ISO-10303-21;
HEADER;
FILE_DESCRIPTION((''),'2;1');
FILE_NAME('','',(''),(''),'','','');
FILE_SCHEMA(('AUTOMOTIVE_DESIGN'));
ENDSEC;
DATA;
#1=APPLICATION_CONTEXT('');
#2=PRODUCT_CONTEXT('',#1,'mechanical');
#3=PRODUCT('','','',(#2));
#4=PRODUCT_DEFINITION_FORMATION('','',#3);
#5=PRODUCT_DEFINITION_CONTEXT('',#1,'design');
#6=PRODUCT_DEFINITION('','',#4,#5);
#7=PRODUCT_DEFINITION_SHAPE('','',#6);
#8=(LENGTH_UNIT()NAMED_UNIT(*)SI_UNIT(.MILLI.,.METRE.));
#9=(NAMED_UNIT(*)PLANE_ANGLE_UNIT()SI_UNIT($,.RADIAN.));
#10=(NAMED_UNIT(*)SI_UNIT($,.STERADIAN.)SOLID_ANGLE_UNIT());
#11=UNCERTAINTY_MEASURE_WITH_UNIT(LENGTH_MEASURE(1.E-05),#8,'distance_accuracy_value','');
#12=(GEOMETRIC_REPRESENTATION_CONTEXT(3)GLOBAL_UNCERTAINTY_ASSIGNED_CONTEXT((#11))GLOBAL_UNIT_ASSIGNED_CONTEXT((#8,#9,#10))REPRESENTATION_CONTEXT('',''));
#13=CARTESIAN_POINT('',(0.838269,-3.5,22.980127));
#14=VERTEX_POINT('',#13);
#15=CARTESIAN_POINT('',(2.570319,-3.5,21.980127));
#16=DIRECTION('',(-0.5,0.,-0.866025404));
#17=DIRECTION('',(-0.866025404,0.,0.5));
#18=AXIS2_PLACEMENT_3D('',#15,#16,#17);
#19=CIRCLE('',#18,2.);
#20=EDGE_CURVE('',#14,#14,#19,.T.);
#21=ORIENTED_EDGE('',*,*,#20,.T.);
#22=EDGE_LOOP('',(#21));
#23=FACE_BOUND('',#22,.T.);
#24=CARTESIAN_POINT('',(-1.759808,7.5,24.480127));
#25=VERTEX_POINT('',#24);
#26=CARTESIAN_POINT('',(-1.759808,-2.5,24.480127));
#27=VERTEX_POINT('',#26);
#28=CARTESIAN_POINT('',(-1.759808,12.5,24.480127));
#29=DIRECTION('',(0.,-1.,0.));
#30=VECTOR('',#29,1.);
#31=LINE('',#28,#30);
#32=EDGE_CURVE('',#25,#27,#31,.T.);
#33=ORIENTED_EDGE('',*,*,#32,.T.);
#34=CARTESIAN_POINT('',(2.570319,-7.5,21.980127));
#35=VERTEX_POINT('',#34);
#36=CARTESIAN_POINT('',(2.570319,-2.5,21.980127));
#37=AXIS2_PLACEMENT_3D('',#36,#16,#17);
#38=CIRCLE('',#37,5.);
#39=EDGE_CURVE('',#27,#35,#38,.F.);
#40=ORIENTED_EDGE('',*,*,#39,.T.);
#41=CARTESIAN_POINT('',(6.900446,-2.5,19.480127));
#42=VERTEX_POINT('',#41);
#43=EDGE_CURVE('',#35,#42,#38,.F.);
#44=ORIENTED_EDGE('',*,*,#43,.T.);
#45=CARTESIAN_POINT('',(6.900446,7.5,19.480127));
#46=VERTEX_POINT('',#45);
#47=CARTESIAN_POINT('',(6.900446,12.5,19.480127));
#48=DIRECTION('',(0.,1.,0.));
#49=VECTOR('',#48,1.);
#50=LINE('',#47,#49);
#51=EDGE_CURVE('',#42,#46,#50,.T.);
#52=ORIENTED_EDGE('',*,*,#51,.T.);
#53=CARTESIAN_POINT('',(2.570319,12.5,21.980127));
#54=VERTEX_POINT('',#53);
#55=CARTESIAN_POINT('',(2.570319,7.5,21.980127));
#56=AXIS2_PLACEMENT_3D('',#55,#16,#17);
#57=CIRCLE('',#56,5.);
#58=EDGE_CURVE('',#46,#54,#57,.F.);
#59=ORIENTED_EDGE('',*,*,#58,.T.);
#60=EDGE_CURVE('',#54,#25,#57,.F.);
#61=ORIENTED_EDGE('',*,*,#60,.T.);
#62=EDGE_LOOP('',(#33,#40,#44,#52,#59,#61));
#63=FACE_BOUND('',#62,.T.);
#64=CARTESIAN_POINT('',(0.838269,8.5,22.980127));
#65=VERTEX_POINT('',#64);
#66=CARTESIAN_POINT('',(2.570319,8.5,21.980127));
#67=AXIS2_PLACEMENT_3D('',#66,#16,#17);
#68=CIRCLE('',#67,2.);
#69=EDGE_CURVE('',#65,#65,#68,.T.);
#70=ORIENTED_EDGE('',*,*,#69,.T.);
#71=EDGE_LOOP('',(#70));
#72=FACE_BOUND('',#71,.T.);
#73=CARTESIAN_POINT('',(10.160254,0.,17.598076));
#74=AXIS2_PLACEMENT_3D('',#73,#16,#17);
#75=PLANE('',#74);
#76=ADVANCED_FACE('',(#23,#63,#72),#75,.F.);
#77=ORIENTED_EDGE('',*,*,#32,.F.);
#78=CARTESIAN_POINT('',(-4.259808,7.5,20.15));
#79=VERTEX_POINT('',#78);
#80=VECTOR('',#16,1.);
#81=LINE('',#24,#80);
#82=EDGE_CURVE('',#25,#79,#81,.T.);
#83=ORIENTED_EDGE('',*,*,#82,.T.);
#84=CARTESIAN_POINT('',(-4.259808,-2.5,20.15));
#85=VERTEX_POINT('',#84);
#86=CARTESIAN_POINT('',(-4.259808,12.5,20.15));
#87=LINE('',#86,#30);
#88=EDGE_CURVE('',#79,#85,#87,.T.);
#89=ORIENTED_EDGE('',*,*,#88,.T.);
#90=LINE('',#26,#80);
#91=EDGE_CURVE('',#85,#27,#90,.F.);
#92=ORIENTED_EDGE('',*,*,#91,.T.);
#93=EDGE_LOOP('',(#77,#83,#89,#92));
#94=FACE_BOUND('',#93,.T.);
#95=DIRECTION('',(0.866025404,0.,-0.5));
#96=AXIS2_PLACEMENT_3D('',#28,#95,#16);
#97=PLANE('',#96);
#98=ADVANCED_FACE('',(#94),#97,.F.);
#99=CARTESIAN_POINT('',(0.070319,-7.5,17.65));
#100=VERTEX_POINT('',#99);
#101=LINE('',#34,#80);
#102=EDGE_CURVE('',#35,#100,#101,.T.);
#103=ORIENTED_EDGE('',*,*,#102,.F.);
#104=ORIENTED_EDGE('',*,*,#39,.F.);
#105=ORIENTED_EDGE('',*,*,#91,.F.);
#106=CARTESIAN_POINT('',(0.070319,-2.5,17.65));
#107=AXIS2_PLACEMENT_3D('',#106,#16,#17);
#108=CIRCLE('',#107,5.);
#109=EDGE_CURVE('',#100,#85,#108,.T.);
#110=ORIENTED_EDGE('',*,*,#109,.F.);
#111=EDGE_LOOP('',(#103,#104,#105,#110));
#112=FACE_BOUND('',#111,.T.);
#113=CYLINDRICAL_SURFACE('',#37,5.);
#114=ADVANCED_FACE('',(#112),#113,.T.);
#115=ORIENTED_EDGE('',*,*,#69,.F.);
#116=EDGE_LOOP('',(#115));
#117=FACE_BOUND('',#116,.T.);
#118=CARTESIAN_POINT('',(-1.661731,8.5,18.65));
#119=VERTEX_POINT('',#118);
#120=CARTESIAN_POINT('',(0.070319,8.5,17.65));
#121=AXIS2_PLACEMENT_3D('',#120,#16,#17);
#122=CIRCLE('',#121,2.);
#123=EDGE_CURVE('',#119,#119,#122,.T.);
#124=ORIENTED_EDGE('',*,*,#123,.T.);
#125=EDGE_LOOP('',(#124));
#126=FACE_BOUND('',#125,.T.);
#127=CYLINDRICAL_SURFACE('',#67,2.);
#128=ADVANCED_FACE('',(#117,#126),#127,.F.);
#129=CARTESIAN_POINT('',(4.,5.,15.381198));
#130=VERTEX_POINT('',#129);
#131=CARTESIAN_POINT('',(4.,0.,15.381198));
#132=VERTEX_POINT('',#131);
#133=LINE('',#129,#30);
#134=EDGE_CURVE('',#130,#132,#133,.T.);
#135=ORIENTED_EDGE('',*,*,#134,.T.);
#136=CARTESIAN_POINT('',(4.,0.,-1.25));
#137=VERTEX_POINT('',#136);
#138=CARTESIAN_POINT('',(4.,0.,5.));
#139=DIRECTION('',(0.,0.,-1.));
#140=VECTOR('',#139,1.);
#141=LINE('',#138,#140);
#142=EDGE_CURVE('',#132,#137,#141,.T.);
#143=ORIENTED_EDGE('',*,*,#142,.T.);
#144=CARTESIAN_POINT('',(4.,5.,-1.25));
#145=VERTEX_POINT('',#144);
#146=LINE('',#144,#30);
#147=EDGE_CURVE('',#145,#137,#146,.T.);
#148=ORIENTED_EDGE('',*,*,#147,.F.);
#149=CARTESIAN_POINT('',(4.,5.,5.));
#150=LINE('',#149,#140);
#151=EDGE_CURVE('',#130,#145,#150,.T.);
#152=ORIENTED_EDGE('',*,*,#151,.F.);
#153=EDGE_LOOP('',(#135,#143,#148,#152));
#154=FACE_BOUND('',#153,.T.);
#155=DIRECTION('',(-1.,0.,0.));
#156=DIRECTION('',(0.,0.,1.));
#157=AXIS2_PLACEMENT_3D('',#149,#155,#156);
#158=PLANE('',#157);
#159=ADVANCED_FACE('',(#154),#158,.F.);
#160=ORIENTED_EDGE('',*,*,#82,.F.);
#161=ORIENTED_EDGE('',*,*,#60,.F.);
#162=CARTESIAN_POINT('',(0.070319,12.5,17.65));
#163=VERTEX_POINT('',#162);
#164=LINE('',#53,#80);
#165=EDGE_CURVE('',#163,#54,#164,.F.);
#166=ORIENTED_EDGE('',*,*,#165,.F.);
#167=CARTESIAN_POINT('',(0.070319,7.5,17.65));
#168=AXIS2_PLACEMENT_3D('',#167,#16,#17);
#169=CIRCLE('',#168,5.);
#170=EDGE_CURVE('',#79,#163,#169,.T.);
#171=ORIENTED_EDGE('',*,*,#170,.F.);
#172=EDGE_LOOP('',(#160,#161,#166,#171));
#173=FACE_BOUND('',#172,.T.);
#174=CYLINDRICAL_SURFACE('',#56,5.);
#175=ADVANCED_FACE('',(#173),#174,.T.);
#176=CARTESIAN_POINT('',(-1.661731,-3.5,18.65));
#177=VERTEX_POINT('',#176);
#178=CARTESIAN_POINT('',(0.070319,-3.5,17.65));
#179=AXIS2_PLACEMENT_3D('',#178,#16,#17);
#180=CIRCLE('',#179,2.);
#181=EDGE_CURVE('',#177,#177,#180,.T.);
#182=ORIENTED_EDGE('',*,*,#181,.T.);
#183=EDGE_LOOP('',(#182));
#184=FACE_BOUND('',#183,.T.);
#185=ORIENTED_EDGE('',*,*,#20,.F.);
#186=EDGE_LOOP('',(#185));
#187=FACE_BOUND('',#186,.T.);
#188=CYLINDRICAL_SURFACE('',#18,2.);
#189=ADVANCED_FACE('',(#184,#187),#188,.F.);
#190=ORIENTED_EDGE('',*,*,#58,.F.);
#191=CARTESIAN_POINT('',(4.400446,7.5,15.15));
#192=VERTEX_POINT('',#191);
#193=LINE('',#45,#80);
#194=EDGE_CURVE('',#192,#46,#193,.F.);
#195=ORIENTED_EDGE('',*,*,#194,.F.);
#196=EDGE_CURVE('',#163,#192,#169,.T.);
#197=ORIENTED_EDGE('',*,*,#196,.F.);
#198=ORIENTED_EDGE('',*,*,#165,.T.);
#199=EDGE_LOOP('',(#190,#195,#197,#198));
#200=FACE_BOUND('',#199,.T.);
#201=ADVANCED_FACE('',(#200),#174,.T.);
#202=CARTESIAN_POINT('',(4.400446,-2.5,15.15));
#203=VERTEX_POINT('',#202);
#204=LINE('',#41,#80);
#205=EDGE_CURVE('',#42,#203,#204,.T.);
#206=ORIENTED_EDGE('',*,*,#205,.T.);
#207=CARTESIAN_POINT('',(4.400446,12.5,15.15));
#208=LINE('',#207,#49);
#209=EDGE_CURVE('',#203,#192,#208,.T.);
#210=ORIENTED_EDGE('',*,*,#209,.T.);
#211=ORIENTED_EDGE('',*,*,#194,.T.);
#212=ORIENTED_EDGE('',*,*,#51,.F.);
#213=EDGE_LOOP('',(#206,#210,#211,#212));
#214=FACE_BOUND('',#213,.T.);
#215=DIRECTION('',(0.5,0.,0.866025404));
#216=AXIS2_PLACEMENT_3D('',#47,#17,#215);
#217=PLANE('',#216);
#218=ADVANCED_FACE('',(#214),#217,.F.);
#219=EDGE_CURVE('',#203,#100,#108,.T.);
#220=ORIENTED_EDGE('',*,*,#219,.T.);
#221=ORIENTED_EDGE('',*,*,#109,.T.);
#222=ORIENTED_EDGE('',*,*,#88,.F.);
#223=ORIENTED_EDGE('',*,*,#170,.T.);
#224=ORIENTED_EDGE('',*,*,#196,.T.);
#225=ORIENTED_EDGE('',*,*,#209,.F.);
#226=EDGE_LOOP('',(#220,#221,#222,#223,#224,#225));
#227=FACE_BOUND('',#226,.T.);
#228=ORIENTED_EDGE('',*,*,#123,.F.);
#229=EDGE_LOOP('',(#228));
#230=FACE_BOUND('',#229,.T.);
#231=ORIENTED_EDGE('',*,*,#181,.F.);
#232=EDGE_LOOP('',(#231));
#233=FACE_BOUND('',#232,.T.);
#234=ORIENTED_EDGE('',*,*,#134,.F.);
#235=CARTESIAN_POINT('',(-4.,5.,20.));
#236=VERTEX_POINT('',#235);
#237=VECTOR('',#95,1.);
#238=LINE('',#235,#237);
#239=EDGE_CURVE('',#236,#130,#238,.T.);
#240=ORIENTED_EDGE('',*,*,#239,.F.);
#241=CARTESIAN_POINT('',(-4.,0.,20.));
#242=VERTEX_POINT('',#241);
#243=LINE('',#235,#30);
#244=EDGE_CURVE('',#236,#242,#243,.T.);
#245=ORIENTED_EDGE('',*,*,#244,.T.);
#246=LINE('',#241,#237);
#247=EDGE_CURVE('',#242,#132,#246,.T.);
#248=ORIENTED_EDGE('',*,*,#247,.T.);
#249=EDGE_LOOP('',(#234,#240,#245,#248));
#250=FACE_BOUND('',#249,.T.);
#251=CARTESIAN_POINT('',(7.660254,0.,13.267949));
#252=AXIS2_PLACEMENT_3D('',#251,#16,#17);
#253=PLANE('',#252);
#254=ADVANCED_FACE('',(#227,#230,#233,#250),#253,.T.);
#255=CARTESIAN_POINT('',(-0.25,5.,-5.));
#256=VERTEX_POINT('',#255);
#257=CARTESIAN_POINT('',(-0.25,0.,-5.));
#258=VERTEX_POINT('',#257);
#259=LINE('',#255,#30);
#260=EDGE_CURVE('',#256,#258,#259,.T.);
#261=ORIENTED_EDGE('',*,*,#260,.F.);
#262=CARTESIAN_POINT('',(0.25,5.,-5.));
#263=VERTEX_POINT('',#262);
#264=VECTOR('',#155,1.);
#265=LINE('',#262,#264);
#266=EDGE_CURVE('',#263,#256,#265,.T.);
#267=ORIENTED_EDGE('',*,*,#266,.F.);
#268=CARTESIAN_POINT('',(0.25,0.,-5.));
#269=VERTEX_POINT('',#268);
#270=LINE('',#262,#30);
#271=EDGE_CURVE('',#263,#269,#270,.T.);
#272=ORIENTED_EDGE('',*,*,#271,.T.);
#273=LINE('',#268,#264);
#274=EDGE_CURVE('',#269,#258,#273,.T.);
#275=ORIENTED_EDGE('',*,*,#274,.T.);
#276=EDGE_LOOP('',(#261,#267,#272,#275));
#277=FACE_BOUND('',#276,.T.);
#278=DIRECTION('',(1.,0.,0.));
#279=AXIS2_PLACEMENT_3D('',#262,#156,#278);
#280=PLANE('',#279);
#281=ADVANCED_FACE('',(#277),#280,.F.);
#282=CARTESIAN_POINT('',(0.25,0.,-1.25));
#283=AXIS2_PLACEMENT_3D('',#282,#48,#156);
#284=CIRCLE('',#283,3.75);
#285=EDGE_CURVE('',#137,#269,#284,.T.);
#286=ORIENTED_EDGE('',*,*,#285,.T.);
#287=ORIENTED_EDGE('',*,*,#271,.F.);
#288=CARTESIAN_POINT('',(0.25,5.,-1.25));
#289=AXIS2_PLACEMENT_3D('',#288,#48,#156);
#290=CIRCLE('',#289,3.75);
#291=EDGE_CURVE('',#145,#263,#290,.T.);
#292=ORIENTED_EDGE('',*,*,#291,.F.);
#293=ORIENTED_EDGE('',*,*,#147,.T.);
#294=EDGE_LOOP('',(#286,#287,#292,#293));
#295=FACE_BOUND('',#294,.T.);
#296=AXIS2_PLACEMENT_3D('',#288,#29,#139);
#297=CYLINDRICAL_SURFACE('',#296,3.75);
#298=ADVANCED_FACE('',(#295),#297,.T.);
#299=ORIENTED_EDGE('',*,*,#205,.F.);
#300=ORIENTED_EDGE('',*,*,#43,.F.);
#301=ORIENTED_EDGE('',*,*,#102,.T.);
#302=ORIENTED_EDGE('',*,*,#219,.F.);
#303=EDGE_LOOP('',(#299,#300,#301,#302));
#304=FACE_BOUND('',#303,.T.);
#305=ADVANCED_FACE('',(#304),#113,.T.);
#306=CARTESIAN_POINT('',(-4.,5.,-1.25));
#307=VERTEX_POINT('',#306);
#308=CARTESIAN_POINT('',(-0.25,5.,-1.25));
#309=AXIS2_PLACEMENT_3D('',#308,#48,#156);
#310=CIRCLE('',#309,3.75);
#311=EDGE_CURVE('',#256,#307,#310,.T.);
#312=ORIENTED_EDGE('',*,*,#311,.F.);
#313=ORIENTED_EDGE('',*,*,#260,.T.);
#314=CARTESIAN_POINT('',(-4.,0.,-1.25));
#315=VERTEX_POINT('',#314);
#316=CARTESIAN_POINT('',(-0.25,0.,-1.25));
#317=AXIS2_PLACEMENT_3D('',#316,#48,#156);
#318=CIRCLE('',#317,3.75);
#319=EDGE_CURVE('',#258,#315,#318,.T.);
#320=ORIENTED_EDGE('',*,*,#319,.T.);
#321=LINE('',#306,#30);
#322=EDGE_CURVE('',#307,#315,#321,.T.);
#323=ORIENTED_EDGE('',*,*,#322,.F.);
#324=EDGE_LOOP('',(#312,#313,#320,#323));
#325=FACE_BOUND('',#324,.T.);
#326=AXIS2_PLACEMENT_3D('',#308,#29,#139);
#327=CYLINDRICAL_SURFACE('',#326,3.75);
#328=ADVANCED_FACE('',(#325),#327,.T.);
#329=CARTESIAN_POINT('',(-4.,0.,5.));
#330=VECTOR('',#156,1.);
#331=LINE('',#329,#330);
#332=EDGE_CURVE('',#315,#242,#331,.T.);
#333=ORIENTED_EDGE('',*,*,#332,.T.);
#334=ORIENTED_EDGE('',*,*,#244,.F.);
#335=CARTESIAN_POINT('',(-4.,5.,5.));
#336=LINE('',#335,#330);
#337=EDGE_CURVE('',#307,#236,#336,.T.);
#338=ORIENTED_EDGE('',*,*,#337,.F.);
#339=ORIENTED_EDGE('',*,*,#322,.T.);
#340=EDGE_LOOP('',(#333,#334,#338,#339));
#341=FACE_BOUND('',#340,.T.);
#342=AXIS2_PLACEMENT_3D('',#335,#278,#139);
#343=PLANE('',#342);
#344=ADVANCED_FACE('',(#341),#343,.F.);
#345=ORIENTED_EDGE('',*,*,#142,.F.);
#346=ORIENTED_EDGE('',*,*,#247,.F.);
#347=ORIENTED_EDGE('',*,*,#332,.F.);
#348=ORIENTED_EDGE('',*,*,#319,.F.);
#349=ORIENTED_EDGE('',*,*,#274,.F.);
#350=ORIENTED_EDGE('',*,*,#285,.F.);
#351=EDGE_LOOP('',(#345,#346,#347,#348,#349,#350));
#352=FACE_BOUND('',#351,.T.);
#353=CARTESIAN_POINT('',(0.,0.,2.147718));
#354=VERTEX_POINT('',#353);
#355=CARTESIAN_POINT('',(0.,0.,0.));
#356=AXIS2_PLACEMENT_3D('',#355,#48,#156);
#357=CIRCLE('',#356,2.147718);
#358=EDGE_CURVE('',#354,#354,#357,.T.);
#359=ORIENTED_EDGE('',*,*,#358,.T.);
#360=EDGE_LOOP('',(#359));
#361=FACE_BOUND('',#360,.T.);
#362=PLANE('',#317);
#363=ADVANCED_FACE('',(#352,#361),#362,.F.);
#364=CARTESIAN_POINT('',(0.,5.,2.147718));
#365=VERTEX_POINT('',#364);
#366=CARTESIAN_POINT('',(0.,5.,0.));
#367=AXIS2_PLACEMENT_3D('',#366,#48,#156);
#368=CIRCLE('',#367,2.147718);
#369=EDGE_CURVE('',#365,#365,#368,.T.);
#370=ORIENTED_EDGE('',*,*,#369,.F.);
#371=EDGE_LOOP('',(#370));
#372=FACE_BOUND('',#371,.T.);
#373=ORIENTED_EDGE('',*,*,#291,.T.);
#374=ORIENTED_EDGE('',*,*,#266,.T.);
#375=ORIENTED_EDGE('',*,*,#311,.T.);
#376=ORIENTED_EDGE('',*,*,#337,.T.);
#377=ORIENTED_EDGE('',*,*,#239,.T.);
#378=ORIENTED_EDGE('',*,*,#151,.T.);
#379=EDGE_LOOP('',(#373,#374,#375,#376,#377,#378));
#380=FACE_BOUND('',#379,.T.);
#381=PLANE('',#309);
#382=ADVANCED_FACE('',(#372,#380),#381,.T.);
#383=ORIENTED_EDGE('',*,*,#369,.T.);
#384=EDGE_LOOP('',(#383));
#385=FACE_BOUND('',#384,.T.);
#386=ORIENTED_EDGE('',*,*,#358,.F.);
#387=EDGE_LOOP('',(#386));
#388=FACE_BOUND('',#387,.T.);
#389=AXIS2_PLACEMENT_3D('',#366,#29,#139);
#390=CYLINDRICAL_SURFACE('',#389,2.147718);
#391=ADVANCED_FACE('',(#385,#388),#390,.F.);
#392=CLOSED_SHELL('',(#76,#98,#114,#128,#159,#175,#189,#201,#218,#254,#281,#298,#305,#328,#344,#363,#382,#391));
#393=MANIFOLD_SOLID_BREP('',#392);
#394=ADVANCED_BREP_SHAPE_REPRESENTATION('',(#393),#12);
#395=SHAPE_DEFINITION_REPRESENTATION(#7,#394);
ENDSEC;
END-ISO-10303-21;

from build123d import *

# Parameters (mm, degrees)
SKETCH1_R           = 2.147718393
BOSS_EXTRUDE1_DEPTH = 5
SKETCH2_W           = 10
SKETCH2_H           = 20
BOSS_EXTRUDE2_DEPTH = 5
SKETCH3_R           = 2
CUT_EXTRUDE1_DEPTH  = 5
FILLET1_R           = 5


with BuildPart() as part:
    # Sketch1 → Boss-Extrude1 (new body)
    with BuildSketch(Plane(origin=(0, 0, 0), x_dir=(1, 0, 0), z_dir=(0, 1, 0))):
        with BuildLine():
            Line((-4, -20), (4, -15.381197846))
            Line((4, -15.381197846), (4, -5))
            Line((4, -5), (4, 1.25))
            ThreePointArc((4, 1.25), (2.901650429, 3.901650429), (0.25, 5))
            Line((0.25, 5), (-0.25, 5))
            ThreePointArc((-0.25, 5), (-2.901650429, 3.901650429), (-4, 1.25))
            Line((-4, 1.25), (-4, -5))
            Line((-4, -5), (-4, -20))
        make_face()
        with Locations(Location((0, 0, 0), (0, 0, 270))):
            Circle(SKETCH1_R, mode=Mode.SUBTRACT)
    extrude(amount=BOSS_EXTRUDE1_DEPTH)

    # Sketch2 → Boss-Extrude2 (add)
    with BuildSketch(Plane(origin=(7.660254038, 0, 13.267949192), x_dir=(0.8660254037844382, 0, -0.500000000000001), z_dir=(0.5000000000000009, 0, 0.866025403784438))):
        with Locations((-8.764101615, 2.5)):
            Rectangle(SKETCH2_W, SKETCH2_H)
    extrude(amount=BOSS_EXTRUDE2_DEPTH)

    # Sketch3 → Cut-Extrude1 (cut)
    with BuildSketch(Plane(origin=(7.660254038, 0, 13.267949192), x_dir=(-0.8660254037844382, 0, 0.5000000000000009), z_dir=(-0.5000000000000009, 0, -0.8660254037844383))):
        with Locations((8.764101615, -3.5)):
            Circle(SKETCH3_R)
        with Locations((8.764101615, 8.5)):
            Circle(SKETCH3_R)
    extrude(amount=-CUT_EXTRUDE1_DEPTH, mode=Mode.SUBTRACT)

    # Fillet1
    fillet1_edges = [part.edges().sort_by_distance(p)[0] for p in [
        (5.650446417, 12.5, 17.315063509),
        (-3.009807621, 12.5, 22.315063509),
        (5.650446417, -7.5, 17.315063509),
        (-3.009807621, -7.5, 22.315063509),
    ]]
    fillet(fillet1_edges, radius=FILLET1_R - 0.0001)  # a hair under: the kernel refuses the full size


solid = part.part
